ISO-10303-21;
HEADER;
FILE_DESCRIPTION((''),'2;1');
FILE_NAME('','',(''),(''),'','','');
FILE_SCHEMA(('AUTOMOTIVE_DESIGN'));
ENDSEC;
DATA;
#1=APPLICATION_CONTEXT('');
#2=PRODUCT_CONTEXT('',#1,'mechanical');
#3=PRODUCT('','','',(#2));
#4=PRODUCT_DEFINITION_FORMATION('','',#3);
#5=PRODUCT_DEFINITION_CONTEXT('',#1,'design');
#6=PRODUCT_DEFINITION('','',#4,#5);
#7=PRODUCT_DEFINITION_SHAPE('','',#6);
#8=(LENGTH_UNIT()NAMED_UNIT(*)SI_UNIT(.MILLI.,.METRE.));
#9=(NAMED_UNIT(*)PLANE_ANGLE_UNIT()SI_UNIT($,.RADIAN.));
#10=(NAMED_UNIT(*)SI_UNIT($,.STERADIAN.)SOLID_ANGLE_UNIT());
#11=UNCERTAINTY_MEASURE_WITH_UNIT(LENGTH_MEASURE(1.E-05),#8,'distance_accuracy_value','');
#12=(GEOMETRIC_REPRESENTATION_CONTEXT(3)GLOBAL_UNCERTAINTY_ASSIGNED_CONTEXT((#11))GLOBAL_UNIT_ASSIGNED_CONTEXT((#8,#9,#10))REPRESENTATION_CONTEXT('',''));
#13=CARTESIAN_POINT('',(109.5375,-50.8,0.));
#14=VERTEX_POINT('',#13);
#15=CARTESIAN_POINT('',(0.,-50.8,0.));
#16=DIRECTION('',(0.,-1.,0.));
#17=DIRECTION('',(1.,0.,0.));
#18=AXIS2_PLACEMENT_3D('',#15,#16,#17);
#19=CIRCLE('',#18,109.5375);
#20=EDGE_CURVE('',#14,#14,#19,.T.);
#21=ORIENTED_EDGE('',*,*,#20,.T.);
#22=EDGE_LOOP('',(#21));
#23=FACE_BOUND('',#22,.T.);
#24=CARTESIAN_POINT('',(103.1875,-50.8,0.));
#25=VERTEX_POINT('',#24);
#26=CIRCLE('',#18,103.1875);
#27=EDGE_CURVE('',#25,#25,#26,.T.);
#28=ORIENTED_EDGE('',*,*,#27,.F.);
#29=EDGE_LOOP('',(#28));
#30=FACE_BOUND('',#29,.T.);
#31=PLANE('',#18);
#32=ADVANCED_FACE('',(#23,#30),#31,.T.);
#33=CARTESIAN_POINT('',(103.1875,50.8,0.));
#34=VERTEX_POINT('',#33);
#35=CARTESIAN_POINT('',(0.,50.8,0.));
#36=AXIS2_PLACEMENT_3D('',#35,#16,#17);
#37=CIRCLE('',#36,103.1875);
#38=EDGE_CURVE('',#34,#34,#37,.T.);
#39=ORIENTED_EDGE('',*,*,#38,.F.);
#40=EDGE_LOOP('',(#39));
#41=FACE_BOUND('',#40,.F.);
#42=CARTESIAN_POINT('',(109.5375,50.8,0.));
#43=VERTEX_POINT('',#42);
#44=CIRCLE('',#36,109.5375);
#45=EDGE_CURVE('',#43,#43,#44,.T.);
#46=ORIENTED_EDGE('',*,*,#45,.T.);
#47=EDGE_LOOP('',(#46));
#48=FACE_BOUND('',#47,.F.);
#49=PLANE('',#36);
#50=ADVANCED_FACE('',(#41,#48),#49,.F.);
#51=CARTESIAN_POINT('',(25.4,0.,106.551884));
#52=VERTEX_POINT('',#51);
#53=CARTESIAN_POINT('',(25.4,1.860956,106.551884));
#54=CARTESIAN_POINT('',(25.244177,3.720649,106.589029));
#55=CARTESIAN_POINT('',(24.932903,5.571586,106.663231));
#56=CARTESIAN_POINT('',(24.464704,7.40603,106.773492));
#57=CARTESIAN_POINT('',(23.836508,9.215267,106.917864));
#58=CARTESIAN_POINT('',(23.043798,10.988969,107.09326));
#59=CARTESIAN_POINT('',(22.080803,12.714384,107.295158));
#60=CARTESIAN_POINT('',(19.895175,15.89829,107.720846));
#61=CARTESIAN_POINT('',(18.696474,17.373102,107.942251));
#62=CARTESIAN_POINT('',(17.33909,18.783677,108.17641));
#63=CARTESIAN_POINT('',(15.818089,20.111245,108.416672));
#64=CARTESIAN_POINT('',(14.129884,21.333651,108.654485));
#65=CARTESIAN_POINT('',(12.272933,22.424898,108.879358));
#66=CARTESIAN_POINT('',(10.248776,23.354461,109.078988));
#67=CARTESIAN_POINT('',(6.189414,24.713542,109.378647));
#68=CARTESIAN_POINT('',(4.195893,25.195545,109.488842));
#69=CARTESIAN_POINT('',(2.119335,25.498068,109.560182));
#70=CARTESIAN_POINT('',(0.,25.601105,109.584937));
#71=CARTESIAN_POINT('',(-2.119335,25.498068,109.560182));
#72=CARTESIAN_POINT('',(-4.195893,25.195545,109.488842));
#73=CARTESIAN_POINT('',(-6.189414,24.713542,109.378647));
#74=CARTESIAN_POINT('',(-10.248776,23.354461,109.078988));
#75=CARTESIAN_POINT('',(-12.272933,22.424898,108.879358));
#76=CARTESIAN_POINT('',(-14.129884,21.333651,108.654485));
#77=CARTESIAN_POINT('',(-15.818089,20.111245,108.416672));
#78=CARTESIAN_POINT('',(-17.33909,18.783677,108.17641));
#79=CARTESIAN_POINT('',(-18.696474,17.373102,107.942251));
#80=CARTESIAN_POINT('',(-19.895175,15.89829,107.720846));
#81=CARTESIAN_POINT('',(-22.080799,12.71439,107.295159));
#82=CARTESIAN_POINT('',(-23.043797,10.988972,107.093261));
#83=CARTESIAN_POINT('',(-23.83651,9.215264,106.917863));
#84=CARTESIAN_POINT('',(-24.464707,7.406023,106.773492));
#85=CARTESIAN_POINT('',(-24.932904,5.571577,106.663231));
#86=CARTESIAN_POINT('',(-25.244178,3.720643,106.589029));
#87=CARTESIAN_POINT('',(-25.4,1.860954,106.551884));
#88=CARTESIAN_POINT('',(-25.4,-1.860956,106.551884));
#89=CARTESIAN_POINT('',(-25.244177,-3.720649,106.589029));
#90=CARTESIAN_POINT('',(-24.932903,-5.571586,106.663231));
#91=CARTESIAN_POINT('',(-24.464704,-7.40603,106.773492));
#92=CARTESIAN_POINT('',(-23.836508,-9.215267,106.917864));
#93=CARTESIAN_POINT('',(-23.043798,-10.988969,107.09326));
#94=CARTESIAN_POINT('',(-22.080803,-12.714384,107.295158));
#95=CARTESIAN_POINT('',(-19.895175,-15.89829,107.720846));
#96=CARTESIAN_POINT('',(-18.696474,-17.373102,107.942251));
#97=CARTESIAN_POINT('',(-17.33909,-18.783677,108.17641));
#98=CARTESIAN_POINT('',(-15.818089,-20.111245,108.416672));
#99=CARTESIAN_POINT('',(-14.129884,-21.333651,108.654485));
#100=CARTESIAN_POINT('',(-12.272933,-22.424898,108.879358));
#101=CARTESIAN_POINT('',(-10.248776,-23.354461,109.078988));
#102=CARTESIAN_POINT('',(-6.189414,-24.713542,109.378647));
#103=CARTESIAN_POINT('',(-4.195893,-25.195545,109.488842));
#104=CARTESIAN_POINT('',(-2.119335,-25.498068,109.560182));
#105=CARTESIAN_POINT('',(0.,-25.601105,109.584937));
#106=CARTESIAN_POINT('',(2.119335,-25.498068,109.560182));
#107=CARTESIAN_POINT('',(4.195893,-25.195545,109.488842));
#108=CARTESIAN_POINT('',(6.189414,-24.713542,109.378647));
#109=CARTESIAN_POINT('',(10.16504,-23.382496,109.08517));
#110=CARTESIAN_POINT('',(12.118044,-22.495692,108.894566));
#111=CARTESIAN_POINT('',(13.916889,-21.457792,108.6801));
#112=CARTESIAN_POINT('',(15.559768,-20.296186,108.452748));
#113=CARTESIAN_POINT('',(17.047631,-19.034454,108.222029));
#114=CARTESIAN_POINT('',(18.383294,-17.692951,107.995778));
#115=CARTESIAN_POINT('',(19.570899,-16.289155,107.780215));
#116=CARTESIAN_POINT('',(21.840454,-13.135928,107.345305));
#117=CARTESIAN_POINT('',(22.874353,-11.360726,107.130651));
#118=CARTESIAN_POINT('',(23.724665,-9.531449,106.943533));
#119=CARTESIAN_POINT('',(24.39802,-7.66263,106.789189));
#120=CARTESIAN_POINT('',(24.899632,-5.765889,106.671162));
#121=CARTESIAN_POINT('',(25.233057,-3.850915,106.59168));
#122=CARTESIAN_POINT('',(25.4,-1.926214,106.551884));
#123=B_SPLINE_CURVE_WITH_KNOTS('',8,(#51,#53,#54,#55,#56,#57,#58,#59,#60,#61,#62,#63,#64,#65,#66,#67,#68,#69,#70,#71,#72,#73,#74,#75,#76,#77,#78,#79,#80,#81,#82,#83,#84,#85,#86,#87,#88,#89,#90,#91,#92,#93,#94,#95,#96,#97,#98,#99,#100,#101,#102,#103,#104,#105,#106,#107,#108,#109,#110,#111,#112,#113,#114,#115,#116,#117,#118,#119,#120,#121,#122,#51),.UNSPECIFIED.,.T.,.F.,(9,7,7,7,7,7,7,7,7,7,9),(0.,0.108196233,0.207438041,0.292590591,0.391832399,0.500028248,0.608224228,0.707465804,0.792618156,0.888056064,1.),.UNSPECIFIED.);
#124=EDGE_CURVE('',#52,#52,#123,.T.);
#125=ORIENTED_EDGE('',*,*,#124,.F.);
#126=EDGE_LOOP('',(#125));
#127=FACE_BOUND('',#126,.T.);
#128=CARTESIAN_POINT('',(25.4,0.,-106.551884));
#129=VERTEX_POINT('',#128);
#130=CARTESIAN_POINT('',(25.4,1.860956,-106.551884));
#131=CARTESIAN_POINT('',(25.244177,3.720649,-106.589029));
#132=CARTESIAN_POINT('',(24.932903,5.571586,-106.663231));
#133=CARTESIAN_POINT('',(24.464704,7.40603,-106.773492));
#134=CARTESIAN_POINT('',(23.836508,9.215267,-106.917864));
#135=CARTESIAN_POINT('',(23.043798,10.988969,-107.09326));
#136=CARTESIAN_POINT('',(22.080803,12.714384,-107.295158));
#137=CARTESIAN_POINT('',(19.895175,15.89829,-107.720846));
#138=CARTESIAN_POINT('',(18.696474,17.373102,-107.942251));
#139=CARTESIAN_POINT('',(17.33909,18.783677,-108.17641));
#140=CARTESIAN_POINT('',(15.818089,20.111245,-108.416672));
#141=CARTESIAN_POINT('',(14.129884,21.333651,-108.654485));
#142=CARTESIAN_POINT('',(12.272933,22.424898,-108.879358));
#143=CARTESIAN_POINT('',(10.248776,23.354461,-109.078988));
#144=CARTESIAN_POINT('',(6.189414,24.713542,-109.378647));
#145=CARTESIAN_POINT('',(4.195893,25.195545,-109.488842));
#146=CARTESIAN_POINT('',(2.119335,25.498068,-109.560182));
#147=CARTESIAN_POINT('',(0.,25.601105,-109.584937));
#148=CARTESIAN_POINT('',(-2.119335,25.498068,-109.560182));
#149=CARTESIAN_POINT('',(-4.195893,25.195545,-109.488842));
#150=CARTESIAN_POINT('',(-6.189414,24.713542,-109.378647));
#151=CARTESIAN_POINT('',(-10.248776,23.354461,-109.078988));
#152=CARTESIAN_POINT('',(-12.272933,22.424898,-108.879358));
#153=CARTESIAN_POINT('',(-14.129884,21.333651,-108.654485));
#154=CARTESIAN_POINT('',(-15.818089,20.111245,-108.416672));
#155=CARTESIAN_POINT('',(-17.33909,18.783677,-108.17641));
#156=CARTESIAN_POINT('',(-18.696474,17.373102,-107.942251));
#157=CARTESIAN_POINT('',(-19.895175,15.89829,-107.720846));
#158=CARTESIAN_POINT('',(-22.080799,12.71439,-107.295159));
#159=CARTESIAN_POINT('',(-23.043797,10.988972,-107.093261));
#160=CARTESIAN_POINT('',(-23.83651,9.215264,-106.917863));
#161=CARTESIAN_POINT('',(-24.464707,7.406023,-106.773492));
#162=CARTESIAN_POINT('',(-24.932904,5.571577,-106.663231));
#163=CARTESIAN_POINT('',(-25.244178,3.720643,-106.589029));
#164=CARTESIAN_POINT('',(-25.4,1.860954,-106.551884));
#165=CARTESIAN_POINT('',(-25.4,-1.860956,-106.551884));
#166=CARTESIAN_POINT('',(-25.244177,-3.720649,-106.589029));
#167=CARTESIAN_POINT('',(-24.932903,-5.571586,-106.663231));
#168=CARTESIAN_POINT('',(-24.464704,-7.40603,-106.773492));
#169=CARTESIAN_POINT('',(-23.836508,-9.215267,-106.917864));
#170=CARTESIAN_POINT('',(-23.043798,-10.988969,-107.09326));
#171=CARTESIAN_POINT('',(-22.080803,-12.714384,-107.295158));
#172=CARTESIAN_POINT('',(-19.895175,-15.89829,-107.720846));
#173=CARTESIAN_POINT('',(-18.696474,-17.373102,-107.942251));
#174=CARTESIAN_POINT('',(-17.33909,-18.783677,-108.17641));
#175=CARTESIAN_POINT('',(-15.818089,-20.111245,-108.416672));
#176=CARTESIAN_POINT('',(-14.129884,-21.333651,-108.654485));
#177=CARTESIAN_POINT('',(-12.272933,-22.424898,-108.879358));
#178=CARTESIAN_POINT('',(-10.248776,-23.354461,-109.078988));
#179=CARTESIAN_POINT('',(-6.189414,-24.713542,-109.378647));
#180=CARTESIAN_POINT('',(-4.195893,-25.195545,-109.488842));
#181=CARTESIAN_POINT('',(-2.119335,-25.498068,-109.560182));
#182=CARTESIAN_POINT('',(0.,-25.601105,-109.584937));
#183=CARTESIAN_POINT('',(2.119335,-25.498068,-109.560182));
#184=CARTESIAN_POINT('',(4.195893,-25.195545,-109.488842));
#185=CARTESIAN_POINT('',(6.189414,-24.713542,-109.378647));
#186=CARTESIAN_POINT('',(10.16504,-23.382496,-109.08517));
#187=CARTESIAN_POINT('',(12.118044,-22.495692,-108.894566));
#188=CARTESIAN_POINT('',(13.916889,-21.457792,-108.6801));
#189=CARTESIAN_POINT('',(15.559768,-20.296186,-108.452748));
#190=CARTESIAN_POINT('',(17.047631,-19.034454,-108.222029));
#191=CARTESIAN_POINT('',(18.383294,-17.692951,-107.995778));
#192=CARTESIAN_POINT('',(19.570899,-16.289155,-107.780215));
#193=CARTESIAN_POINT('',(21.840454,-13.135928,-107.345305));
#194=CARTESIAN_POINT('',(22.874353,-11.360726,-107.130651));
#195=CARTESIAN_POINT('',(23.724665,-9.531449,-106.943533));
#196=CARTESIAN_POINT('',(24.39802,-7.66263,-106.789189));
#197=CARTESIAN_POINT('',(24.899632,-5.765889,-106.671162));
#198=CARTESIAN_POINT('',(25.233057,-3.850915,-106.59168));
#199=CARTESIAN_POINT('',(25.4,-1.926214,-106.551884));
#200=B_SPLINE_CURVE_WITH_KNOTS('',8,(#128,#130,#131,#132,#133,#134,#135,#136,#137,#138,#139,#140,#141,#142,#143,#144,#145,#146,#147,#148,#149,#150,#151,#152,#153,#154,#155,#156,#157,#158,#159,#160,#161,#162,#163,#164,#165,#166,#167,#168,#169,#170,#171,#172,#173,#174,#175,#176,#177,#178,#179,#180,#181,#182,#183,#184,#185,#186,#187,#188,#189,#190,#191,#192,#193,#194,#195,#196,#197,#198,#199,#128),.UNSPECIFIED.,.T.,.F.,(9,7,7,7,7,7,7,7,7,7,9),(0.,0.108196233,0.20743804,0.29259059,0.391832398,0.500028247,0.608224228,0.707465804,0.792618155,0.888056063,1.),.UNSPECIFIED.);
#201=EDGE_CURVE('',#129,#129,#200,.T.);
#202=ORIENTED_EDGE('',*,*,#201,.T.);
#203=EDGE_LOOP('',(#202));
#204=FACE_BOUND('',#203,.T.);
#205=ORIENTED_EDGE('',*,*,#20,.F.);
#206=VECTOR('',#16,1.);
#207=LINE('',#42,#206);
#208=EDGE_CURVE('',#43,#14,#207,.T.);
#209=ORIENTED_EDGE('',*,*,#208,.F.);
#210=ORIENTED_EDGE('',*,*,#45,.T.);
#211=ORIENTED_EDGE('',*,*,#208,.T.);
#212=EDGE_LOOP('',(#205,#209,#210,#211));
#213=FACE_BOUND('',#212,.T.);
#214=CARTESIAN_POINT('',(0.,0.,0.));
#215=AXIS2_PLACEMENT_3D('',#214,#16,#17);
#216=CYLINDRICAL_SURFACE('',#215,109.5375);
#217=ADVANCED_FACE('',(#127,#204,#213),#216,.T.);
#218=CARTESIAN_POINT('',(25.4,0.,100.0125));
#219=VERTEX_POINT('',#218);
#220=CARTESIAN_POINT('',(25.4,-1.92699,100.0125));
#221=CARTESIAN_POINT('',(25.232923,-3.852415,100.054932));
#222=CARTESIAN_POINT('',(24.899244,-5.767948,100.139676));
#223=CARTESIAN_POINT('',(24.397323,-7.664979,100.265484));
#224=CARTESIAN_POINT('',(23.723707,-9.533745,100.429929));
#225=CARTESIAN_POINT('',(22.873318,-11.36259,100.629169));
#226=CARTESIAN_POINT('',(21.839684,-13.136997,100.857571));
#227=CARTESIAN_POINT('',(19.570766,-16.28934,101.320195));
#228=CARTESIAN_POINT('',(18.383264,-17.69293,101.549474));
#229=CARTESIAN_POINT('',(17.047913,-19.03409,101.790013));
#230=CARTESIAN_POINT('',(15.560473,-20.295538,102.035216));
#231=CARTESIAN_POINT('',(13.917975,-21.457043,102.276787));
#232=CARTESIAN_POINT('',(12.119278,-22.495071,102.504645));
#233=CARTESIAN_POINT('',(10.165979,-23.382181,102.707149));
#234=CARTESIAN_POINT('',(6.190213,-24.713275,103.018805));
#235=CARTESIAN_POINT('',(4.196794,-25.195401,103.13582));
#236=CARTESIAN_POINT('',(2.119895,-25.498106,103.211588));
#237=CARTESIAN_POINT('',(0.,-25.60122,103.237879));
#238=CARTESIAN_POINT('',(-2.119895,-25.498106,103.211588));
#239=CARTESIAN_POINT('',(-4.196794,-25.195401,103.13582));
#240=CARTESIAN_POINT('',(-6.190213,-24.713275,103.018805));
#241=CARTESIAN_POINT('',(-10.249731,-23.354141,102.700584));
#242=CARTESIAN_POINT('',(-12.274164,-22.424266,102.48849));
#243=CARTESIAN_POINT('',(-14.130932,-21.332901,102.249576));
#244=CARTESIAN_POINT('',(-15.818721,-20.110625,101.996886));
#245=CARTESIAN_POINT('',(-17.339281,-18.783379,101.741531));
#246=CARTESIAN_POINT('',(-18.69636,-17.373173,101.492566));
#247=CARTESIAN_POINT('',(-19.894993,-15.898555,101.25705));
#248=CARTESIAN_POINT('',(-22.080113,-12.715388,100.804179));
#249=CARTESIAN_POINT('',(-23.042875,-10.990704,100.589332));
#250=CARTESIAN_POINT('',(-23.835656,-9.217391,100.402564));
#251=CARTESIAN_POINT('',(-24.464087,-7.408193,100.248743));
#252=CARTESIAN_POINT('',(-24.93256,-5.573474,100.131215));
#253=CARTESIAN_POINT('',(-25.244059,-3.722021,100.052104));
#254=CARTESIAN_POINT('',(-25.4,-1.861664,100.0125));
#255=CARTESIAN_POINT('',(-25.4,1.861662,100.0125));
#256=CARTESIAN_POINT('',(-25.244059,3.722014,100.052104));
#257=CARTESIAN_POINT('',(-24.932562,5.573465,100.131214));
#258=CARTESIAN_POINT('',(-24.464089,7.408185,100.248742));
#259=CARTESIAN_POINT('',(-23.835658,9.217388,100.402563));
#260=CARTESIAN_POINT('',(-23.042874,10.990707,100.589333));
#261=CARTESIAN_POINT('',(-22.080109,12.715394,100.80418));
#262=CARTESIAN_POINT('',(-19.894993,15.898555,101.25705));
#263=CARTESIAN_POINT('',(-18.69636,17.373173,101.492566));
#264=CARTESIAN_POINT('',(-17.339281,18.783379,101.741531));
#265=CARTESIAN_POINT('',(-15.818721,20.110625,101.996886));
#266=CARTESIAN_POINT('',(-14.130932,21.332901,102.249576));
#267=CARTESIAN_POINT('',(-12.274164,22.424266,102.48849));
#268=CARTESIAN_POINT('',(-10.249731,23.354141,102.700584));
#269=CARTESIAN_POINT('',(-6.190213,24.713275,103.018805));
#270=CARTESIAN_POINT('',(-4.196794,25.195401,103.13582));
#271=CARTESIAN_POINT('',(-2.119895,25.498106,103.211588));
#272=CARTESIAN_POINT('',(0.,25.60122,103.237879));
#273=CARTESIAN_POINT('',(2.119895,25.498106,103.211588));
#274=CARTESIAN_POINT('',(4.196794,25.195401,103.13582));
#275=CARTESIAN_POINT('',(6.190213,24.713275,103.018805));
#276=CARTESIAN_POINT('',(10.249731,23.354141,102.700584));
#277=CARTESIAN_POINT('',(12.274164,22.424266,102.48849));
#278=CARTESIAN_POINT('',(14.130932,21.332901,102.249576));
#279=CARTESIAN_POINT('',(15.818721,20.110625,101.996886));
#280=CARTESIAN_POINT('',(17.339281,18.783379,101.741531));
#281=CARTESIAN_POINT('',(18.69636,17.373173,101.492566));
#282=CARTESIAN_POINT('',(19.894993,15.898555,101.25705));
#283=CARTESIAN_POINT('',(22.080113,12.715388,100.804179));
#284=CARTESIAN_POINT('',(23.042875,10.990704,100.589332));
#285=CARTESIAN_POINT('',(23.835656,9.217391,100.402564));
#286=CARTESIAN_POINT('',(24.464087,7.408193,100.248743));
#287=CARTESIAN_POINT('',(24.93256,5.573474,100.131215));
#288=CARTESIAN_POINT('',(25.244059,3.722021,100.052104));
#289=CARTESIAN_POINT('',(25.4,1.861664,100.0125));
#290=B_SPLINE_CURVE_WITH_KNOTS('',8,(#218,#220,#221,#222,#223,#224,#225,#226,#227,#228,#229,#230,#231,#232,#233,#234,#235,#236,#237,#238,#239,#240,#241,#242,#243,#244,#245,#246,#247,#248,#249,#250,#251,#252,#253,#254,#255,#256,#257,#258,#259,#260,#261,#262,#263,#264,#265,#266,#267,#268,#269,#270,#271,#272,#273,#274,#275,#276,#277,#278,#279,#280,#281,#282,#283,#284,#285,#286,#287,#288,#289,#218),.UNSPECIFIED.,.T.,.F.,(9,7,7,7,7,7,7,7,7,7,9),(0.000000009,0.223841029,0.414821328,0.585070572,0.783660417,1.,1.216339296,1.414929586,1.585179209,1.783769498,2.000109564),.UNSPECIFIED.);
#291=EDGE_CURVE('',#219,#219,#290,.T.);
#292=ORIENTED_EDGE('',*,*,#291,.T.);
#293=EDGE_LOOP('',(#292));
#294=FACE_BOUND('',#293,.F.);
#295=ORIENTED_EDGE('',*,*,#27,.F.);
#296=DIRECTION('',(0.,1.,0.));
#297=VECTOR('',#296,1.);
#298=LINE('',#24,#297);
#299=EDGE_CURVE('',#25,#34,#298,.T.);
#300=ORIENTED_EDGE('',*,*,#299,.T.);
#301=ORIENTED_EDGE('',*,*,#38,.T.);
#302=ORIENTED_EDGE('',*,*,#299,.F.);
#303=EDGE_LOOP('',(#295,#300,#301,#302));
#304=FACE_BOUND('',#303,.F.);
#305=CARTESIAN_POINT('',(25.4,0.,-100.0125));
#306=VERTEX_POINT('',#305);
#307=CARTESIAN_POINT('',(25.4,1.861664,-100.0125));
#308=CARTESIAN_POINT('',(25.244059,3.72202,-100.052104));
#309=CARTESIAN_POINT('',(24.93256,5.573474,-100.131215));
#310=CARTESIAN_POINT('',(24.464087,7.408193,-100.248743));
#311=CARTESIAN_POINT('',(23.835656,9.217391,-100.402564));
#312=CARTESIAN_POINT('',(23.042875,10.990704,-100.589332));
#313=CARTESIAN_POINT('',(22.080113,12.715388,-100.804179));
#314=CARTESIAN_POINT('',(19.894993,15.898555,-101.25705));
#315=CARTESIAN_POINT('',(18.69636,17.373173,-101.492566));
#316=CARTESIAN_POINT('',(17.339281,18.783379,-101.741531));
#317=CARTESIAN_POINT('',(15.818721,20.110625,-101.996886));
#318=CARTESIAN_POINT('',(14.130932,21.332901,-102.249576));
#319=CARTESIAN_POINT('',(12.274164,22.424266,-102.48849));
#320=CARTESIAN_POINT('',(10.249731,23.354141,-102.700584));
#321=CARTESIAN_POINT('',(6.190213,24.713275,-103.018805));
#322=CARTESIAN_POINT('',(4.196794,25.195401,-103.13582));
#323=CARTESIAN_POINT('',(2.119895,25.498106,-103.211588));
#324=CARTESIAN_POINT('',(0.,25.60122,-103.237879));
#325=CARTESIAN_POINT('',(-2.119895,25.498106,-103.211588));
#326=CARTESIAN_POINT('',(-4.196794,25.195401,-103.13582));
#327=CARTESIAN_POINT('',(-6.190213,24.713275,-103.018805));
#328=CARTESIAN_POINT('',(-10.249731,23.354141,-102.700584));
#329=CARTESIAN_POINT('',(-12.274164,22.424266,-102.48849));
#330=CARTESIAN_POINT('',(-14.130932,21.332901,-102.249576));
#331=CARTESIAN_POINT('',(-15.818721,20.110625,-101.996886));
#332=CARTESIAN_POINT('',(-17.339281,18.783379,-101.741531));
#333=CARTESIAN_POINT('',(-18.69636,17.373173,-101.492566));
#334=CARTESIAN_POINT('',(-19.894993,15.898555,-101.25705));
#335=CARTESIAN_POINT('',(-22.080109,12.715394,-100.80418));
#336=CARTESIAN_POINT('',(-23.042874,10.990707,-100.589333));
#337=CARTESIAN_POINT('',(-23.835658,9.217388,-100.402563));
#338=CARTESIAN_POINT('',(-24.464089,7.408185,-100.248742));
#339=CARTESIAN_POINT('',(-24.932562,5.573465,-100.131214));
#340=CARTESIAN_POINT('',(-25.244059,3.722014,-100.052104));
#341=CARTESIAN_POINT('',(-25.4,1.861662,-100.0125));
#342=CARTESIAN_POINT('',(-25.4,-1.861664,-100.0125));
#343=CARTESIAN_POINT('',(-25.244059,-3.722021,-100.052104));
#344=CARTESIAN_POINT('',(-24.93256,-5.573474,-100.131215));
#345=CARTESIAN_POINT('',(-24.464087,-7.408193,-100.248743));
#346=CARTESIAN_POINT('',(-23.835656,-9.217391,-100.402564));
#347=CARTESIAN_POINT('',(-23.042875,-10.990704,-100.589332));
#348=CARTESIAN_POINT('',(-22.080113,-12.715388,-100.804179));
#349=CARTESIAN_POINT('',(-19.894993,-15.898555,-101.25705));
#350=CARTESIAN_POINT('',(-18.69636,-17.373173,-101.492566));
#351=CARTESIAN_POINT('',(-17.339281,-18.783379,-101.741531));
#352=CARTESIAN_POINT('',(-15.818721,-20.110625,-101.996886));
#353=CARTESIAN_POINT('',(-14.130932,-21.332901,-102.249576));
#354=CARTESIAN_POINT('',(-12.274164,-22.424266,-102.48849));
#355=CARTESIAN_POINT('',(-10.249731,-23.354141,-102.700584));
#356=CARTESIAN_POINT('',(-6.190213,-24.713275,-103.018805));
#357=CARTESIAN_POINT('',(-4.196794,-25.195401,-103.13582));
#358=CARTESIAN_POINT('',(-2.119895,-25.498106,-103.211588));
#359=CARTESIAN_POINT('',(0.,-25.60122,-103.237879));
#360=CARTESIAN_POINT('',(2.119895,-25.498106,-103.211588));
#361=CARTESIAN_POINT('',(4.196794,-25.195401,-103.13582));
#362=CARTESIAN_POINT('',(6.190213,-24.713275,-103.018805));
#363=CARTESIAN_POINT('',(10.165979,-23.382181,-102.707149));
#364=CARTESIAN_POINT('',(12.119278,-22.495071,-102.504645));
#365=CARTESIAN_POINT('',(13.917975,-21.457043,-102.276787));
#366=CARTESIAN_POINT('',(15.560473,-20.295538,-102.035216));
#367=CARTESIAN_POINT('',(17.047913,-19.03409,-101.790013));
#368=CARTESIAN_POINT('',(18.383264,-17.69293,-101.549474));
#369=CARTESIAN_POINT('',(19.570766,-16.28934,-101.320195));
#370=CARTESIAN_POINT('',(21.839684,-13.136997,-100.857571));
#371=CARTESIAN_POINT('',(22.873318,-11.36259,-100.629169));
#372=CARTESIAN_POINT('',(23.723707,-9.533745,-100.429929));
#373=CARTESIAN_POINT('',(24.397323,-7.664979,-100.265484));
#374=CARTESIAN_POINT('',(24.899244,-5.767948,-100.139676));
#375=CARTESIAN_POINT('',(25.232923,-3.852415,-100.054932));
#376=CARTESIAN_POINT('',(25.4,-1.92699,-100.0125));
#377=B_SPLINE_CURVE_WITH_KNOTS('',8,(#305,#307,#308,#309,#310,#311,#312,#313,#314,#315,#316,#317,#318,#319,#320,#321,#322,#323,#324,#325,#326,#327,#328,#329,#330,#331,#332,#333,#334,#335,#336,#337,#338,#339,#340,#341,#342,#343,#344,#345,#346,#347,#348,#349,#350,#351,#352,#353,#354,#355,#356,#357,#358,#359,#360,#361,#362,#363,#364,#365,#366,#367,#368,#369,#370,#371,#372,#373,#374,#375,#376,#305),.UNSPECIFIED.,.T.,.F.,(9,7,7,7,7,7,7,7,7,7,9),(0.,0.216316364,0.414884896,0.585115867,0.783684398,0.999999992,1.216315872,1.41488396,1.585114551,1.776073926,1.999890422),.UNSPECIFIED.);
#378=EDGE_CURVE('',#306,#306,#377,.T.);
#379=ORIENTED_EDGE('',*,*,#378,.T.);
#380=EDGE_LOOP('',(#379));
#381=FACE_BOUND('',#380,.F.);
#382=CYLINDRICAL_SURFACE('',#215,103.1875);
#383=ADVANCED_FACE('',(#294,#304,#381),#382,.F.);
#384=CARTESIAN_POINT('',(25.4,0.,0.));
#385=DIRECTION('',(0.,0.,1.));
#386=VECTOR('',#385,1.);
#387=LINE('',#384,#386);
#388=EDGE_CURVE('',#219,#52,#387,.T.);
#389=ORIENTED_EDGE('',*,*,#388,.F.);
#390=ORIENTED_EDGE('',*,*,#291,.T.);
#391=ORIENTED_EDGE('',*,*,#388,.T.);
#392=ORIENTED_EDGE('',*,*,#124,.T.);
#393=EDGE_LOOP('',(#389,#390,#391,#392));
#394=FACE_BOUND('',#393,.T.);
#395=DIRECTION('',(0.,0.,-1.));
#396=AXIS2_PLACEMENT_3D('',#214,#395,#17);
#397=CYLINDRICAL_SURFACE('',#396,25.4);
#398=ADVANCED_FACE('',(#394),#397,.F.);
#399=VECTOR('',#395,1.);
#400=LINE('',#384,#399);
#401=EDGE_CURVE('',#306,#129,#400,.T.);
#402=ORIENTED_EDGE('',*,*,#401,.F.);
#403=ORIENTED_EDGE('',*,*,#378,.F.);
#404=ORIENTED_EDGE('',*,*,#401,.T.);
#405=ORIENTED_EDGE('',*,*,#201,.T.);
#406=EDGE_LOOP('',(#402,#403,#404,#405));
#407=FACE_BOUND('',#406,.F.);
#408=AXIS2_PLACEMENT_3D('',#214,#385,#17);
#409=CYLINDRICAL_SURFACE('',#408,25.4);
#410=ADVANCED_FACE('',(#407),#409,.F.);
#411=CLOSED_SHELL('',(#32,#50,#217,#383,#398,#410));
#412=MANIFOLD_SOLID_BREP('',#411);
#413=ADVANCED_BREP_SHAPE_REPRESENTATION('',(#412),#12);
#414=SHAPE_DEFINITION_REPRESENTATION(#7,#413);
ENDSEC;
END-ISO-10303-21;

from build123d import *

# Parameters (mm, degrees)
F0_R          = 109.5375
F0_R_2        = 103.1875
F1_DEPTH      = 50.8
F1_DEPTH_BACK = 50.8
F3_R          = 25.4
F4_DEPTH      = 109.5385
F4_DEPTH_BACK = 109.5385


# Not quite as in the source:
# - a feature names something its author has since deleted; it is built from what else it names


with BuildPart() as f1:
    # F0 (on Front) → F1 (new body, two sides)
    with BuildSketch(Plane.XZ) as f1_sk:
        Circle(F0_R)
        Circle(F0_R_2, mode=Mode.SUBTRACT)
    extrude(amount=F1_DEPTH)
    extrude(f1_sk.sketch, amount=-F1_DEPTH_BACK)

    # F3 (on Top) → F4 (cut, two sides)
    with BuildSketch(Plane.XY) as f4_sk:
        Circle(F3_R)
    extrude(amount=-F4_DEPTH, mode=Mode.SUBTRACT)
    extrude(f4_sk.sketch, amount=F4_DEPTH_BACK, mode=Mode.SUBTRACT)


solid = f1.part
